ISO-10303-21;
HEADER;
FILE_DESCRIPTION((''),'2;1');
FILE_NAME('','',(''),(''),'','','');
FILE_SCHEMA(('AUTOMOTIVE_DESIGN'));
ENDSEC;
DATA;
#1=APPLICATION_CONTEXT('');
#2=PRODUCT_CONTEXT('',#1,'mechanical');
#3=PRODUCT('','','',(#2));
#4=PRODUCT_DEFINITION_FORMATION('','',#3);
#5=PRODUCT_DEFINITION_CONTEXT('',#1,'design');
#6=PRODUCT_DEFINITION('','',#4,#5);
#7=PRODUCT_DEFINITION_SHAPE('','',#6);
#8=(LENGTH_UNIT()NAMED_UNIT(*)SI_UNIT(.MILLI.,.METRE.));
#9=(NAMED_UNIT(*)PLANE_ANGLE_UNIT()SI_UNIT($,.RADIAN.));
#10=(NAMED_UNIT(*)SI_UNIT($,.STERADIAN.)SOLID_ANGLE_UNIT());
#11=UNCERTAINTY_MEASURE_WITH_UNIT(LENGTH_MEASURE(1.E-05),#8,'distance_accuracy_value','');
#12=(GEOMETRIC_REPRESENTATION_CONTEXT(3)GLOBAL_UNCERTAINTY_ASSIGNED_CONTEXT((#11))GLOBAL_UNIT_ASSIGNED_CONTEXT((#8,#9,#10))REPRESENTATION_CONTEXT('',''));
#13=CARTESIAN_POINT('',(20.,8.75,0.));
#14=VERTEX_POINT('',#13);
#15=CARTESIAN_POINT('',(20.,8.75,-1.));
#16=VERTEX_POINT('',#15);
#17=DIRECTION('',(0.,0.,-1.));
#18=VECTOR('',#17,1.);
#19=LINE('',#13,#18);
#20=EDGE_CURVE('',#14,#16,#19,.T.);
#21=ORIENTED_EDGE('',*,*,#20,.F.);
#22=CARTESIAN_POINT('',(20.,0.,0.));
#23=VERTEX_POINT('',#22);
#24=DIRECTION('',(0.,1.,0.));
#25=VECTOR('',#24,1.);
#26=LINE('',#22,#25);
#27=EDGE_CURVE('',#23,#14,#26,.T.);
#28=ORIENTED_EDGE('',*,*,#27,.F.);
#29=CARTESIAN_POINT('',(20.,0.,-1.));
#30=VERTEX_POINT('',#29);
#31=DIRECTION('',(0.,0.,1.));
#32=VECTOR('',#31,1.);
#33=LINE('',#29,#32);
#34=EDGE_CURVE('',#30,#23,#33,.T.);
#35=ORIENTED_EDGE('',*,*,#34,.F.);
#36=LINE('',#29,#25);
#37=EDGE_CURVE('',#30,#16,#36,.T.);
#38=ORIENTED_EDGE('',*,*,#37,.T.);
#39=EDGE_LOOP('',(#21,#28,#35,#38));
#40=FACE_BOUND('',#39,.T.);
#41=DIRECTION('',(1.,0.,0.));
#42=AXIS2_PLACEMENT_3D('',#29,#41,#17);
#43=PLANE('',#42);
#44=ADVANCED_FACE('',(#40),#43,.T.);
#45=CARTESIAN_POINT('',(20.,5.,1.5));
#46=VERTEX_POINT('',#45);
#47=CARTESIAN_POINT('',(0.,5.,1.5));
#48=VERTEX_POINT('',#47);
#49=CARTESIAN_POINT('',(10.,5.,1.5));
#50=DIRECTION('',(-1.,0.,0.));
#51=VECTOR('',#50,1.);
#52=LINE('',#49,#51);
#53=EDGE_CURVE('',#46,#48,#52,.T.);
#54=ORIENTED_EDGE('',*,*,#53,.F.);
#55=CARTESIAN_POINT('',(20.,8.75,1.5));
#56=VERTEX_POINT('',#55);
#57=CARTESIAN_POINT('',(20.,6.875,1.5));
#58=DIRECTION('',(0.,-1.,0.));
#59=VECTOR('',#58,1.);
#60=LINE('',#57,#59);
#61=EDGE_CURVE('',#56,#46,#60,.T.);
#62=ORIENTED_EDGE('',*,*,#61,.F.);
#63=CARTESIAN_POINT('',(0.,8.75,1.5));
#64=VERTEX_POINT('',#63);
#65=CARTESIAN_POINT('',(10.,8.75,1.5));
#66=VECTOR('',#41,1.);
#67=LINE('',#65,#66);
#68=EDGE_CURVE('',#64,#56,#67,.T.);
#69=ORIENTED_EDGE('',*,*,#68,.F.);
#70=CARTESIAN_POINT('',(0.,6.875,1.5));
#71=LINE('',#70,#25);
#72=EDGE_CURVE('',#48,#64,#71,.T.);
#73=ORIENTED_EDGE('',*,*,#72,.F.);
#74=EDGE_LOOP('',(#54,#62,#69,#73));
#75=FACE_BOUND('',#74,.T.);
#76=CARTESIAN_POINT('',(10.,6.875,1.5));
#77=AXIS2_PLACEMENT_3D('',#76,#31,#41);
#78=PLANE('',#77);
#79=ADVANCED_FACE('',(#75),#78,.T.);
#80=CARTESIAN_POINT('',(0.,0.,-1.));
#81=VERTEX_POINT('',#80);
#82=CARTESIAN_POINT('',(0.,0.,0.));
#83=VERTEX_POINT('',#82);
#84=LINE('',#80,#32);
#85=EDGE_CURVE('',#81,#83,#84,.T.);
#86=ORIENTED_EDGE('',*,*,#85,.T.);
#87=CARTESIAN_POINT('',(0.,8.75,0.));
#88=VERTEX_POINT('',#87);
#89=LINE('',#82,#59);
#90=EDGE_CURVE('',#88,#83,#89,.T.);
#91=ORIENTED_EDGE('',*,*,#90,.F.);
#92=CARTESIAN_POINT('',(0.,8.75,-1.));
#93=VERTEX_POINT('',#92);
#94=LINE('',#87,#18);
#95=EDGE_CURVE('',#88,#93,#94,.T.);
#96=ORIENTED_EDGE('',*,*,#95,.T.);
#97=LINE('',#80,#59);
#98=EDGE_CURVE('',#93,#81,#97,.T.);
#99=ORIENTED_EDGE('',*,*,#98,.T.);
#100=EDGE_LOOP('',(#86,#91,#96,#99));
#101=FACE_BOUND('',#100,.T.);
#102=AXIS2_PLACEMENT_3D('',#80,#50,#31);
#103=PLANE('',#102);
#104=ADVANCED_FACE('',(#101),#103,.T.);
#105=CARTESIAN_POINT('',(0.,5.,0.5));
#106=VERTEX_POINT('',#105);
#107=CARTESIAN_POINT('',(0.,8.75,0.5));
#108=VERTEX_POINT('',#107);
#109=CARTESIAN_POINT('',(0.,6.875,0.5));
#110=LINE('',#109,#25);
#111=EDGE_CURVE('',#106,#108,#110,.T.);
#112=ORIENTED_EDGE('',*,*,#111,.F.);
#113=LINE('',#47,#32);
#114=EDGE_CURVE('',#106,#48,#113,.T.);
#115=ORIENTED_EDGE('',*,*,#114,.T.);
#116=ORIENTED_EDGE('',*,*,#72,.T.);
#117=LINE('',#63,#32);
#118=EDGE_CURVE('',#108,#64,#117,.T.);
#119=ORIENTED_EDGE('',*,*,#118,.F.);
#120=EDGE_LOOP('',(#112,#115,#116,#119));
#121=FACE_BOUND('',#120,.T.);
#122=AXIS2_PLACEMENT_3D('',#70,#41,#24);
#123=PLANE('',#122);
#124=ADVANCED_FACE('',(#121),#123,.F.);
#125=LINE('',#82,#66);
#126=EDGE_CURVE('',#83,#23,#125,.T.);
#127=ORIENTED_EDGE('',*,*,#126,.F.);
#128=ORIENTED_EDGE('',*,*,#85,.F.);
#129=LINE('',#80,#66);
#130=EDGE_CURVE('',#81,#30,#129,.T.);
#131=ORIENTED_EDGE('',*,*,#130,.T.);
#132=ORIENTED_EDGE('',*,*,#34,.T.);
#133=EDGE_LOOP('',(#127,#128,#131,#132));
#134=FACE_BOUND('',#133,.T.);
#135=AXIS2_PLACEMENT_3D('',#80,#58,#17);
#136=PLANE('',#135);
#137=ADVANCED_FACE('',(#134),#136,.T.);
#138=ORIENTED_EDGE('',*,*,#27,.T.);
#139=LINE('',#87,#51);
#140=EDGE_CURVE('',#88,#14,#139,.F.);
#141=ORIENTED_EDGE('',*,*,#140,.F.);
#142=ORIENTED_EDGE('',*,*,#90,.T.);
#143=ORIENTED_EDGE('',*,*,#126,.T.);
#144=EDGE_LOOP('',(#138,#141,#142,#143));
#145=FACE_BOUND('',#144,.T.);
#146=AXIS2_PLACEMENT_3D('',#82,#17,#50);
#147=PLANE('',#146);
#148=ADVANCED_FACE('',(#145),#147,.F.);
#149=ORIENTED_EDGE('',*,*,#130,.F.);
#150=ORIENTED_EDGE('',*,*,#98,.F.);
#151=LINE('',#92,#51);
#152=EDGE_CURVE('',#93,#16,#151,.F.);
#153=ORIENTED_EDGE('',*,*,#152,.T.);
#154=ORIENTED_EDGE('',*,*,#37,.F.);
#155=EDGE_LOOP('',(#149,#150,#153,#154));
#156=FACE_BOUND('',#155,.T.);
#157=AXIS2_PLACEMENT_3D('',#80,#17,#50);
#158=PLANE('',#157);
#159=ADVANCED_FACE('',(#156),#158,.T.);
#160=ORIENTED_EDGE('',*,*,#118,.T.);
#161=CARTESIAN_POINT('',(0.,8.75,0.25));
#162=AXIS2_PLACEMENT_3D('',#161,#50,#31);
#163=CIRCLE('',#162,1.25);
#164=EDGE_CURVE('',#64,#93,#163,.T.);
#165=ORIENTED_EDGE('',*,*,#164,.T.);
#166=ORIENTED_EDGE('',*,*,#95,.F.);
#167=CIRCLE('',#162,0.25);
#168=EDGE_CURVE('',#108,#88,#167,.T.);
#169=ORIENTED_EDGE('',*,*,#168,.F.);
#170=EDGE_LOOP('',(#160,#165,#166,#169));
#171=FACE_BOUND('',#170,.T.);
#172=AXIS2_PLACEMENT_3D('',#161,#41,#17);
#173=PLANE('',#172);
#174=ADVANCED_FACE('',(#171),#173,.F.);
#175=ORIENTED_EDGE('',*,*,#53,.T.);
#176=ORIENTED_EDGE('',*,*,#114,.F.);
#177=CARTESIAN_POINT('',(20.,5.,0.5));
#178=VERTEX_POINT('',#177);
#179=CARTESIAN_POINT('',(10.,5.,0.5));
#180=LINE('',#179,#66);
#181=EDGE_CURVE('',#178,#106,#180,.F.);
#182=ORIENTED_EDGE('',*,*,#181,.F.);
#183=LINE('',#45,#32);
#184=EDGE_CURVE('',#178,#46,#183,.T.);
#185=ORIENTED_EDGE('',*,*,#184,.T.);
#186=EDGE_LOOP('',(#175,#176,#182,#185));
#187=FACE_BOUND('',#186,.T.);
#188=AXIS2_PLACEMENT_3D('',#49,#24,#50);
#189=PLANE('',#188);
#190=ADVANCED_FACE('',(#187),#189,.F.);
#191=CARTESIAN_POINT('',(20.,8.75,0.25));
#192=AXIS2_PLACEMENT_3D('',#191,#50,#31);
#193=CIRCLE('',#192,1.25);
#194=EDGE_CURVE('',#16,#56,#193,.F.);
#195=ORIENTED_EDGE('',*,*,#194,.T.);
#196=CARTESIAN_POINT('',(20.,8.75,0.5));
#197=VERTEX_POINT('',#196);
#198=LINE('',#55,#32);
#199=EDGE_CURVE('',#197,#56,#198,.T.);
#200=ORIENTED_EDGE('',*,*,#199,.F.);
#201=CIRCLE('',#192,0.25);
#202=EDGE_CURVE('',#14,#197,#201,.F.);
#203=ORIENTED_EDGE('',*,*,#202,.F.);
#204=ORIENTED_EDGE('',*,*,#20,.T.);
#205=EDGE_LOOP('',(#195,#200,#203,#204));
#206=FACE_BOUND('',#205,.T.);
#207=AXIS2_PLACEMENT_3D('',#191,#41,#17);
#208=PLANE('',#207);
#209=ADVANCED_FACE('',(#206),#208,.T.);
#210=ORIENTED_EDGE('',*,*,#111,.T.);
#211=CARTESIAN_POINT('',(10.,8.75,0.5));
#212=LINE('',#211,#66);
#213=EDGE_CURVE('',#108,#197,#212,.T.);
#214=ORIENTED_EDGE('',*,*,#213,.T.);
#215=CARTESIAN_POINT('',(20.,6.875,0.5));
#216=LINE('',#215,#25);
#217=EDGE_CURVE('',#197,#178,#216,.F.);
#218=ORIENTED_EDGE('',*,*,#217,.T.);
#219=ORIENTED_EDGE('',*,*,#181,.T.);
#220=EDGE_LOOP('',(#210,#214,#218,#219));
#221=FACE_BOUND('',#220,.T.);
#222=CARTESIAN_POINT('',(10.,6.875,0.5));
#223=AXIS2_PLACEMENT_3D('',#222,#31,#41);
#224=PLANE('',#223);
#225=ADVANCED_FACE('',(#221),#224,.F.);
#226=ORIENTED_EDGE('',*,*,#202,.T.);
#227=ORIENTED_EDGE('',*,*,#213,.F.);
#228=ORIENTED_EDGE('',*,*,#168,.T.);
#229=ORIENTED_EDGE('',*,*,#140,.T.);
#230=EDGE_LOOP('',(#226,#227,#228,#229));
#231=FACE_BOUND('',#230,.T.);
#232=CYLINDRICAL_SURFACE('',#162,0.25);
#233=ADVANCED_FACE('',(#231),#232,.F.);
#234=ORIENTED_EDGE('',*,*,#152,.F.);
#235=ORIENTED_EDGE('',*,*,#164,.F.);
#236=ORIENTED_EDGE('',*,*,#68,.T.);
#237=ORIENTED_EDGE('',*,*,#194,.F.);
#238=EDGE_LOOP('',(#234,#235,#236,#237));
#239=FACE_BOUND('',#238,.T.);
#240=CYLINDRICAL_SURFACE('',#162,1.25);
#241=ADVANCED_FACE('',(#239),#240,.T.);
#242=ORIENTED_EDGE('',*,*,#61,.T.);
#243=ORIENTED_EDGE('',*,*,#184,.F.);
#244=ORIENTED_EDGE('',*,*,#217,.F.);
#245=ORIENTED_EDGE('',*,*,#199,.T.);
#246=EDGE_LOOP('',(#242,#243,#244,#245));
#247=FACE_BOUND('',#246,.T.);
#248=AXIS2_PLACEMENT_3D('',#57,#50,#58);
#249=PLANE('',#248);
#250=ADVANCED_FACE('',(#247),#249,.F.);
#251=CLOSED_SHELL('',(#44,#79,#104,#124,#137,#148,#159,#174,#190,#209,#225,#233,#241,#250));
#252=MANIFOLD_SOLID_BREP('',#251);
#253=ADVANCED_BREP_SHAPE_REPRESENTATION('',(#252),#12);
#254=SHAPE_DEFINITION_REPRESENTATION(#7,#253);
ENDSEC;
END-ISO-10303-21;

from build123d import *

# Parameters (mm, degrees)
SKETCH_1_W       = 20
SKETCH_1_H       = 10
BASEPLATE_DEPTH  = 1
HEM_OPEN_DEPTH   = 20
HEM_OPEN_2_DEPTH = 20


# Read off the part's stored shape, not the designer's step: Hem_open
# Sheet-metal steps are written as plain solids
with BuildPart() as part:
    # Sketch 1 → BasePlate (new body)
    with BuildSketch(Plane.XY):
        with Locations((10, 5)):
            Rectangle(SKETCH_1_W, SKETCH_1_H)
    extrude(amount=-BASEPLATE_DEPTH)

    # Hem_open outline → Hem_open (cut)
    with BuildSketch(Plane.YZ):
        with BuildLine():
            Line((10, 0), (9.974744871, 0))
            ThreePointArc((9.974744871, 0), (9.540569415, -0.718245837), (8.75, -1))
            Line((8.75, -1), (10, -1))
            Line((10, -1), (10, 0))
        make_face()
    extrude(amount=HEM_OPEN_DEPTH, mode=Mode.SUBTRACT)

    # Hem_open 2 outline → Hem_open 2 (add)
    with BuildSketch(Plane.YZ):
        with BuildLine():
            Line((5, 1.5), (5, 0.5))
            Line((5, 0.5), (8.75, 0.5))
            ThreePointArc((8.75, 0.5), (9, 0.25), (8.75, 0))
            Line((8.75, 0), (9.974744871, 0))
            ThreePointArc((9.974744871, 0), (9.718245837, 1.040569415), (8.75, 1.5))
            Line((8.75, 1.5), (5, 1.5))
        make_face()
    extrude(amount=HEM_OPEN_2_DEPTH)


solid = part.part
